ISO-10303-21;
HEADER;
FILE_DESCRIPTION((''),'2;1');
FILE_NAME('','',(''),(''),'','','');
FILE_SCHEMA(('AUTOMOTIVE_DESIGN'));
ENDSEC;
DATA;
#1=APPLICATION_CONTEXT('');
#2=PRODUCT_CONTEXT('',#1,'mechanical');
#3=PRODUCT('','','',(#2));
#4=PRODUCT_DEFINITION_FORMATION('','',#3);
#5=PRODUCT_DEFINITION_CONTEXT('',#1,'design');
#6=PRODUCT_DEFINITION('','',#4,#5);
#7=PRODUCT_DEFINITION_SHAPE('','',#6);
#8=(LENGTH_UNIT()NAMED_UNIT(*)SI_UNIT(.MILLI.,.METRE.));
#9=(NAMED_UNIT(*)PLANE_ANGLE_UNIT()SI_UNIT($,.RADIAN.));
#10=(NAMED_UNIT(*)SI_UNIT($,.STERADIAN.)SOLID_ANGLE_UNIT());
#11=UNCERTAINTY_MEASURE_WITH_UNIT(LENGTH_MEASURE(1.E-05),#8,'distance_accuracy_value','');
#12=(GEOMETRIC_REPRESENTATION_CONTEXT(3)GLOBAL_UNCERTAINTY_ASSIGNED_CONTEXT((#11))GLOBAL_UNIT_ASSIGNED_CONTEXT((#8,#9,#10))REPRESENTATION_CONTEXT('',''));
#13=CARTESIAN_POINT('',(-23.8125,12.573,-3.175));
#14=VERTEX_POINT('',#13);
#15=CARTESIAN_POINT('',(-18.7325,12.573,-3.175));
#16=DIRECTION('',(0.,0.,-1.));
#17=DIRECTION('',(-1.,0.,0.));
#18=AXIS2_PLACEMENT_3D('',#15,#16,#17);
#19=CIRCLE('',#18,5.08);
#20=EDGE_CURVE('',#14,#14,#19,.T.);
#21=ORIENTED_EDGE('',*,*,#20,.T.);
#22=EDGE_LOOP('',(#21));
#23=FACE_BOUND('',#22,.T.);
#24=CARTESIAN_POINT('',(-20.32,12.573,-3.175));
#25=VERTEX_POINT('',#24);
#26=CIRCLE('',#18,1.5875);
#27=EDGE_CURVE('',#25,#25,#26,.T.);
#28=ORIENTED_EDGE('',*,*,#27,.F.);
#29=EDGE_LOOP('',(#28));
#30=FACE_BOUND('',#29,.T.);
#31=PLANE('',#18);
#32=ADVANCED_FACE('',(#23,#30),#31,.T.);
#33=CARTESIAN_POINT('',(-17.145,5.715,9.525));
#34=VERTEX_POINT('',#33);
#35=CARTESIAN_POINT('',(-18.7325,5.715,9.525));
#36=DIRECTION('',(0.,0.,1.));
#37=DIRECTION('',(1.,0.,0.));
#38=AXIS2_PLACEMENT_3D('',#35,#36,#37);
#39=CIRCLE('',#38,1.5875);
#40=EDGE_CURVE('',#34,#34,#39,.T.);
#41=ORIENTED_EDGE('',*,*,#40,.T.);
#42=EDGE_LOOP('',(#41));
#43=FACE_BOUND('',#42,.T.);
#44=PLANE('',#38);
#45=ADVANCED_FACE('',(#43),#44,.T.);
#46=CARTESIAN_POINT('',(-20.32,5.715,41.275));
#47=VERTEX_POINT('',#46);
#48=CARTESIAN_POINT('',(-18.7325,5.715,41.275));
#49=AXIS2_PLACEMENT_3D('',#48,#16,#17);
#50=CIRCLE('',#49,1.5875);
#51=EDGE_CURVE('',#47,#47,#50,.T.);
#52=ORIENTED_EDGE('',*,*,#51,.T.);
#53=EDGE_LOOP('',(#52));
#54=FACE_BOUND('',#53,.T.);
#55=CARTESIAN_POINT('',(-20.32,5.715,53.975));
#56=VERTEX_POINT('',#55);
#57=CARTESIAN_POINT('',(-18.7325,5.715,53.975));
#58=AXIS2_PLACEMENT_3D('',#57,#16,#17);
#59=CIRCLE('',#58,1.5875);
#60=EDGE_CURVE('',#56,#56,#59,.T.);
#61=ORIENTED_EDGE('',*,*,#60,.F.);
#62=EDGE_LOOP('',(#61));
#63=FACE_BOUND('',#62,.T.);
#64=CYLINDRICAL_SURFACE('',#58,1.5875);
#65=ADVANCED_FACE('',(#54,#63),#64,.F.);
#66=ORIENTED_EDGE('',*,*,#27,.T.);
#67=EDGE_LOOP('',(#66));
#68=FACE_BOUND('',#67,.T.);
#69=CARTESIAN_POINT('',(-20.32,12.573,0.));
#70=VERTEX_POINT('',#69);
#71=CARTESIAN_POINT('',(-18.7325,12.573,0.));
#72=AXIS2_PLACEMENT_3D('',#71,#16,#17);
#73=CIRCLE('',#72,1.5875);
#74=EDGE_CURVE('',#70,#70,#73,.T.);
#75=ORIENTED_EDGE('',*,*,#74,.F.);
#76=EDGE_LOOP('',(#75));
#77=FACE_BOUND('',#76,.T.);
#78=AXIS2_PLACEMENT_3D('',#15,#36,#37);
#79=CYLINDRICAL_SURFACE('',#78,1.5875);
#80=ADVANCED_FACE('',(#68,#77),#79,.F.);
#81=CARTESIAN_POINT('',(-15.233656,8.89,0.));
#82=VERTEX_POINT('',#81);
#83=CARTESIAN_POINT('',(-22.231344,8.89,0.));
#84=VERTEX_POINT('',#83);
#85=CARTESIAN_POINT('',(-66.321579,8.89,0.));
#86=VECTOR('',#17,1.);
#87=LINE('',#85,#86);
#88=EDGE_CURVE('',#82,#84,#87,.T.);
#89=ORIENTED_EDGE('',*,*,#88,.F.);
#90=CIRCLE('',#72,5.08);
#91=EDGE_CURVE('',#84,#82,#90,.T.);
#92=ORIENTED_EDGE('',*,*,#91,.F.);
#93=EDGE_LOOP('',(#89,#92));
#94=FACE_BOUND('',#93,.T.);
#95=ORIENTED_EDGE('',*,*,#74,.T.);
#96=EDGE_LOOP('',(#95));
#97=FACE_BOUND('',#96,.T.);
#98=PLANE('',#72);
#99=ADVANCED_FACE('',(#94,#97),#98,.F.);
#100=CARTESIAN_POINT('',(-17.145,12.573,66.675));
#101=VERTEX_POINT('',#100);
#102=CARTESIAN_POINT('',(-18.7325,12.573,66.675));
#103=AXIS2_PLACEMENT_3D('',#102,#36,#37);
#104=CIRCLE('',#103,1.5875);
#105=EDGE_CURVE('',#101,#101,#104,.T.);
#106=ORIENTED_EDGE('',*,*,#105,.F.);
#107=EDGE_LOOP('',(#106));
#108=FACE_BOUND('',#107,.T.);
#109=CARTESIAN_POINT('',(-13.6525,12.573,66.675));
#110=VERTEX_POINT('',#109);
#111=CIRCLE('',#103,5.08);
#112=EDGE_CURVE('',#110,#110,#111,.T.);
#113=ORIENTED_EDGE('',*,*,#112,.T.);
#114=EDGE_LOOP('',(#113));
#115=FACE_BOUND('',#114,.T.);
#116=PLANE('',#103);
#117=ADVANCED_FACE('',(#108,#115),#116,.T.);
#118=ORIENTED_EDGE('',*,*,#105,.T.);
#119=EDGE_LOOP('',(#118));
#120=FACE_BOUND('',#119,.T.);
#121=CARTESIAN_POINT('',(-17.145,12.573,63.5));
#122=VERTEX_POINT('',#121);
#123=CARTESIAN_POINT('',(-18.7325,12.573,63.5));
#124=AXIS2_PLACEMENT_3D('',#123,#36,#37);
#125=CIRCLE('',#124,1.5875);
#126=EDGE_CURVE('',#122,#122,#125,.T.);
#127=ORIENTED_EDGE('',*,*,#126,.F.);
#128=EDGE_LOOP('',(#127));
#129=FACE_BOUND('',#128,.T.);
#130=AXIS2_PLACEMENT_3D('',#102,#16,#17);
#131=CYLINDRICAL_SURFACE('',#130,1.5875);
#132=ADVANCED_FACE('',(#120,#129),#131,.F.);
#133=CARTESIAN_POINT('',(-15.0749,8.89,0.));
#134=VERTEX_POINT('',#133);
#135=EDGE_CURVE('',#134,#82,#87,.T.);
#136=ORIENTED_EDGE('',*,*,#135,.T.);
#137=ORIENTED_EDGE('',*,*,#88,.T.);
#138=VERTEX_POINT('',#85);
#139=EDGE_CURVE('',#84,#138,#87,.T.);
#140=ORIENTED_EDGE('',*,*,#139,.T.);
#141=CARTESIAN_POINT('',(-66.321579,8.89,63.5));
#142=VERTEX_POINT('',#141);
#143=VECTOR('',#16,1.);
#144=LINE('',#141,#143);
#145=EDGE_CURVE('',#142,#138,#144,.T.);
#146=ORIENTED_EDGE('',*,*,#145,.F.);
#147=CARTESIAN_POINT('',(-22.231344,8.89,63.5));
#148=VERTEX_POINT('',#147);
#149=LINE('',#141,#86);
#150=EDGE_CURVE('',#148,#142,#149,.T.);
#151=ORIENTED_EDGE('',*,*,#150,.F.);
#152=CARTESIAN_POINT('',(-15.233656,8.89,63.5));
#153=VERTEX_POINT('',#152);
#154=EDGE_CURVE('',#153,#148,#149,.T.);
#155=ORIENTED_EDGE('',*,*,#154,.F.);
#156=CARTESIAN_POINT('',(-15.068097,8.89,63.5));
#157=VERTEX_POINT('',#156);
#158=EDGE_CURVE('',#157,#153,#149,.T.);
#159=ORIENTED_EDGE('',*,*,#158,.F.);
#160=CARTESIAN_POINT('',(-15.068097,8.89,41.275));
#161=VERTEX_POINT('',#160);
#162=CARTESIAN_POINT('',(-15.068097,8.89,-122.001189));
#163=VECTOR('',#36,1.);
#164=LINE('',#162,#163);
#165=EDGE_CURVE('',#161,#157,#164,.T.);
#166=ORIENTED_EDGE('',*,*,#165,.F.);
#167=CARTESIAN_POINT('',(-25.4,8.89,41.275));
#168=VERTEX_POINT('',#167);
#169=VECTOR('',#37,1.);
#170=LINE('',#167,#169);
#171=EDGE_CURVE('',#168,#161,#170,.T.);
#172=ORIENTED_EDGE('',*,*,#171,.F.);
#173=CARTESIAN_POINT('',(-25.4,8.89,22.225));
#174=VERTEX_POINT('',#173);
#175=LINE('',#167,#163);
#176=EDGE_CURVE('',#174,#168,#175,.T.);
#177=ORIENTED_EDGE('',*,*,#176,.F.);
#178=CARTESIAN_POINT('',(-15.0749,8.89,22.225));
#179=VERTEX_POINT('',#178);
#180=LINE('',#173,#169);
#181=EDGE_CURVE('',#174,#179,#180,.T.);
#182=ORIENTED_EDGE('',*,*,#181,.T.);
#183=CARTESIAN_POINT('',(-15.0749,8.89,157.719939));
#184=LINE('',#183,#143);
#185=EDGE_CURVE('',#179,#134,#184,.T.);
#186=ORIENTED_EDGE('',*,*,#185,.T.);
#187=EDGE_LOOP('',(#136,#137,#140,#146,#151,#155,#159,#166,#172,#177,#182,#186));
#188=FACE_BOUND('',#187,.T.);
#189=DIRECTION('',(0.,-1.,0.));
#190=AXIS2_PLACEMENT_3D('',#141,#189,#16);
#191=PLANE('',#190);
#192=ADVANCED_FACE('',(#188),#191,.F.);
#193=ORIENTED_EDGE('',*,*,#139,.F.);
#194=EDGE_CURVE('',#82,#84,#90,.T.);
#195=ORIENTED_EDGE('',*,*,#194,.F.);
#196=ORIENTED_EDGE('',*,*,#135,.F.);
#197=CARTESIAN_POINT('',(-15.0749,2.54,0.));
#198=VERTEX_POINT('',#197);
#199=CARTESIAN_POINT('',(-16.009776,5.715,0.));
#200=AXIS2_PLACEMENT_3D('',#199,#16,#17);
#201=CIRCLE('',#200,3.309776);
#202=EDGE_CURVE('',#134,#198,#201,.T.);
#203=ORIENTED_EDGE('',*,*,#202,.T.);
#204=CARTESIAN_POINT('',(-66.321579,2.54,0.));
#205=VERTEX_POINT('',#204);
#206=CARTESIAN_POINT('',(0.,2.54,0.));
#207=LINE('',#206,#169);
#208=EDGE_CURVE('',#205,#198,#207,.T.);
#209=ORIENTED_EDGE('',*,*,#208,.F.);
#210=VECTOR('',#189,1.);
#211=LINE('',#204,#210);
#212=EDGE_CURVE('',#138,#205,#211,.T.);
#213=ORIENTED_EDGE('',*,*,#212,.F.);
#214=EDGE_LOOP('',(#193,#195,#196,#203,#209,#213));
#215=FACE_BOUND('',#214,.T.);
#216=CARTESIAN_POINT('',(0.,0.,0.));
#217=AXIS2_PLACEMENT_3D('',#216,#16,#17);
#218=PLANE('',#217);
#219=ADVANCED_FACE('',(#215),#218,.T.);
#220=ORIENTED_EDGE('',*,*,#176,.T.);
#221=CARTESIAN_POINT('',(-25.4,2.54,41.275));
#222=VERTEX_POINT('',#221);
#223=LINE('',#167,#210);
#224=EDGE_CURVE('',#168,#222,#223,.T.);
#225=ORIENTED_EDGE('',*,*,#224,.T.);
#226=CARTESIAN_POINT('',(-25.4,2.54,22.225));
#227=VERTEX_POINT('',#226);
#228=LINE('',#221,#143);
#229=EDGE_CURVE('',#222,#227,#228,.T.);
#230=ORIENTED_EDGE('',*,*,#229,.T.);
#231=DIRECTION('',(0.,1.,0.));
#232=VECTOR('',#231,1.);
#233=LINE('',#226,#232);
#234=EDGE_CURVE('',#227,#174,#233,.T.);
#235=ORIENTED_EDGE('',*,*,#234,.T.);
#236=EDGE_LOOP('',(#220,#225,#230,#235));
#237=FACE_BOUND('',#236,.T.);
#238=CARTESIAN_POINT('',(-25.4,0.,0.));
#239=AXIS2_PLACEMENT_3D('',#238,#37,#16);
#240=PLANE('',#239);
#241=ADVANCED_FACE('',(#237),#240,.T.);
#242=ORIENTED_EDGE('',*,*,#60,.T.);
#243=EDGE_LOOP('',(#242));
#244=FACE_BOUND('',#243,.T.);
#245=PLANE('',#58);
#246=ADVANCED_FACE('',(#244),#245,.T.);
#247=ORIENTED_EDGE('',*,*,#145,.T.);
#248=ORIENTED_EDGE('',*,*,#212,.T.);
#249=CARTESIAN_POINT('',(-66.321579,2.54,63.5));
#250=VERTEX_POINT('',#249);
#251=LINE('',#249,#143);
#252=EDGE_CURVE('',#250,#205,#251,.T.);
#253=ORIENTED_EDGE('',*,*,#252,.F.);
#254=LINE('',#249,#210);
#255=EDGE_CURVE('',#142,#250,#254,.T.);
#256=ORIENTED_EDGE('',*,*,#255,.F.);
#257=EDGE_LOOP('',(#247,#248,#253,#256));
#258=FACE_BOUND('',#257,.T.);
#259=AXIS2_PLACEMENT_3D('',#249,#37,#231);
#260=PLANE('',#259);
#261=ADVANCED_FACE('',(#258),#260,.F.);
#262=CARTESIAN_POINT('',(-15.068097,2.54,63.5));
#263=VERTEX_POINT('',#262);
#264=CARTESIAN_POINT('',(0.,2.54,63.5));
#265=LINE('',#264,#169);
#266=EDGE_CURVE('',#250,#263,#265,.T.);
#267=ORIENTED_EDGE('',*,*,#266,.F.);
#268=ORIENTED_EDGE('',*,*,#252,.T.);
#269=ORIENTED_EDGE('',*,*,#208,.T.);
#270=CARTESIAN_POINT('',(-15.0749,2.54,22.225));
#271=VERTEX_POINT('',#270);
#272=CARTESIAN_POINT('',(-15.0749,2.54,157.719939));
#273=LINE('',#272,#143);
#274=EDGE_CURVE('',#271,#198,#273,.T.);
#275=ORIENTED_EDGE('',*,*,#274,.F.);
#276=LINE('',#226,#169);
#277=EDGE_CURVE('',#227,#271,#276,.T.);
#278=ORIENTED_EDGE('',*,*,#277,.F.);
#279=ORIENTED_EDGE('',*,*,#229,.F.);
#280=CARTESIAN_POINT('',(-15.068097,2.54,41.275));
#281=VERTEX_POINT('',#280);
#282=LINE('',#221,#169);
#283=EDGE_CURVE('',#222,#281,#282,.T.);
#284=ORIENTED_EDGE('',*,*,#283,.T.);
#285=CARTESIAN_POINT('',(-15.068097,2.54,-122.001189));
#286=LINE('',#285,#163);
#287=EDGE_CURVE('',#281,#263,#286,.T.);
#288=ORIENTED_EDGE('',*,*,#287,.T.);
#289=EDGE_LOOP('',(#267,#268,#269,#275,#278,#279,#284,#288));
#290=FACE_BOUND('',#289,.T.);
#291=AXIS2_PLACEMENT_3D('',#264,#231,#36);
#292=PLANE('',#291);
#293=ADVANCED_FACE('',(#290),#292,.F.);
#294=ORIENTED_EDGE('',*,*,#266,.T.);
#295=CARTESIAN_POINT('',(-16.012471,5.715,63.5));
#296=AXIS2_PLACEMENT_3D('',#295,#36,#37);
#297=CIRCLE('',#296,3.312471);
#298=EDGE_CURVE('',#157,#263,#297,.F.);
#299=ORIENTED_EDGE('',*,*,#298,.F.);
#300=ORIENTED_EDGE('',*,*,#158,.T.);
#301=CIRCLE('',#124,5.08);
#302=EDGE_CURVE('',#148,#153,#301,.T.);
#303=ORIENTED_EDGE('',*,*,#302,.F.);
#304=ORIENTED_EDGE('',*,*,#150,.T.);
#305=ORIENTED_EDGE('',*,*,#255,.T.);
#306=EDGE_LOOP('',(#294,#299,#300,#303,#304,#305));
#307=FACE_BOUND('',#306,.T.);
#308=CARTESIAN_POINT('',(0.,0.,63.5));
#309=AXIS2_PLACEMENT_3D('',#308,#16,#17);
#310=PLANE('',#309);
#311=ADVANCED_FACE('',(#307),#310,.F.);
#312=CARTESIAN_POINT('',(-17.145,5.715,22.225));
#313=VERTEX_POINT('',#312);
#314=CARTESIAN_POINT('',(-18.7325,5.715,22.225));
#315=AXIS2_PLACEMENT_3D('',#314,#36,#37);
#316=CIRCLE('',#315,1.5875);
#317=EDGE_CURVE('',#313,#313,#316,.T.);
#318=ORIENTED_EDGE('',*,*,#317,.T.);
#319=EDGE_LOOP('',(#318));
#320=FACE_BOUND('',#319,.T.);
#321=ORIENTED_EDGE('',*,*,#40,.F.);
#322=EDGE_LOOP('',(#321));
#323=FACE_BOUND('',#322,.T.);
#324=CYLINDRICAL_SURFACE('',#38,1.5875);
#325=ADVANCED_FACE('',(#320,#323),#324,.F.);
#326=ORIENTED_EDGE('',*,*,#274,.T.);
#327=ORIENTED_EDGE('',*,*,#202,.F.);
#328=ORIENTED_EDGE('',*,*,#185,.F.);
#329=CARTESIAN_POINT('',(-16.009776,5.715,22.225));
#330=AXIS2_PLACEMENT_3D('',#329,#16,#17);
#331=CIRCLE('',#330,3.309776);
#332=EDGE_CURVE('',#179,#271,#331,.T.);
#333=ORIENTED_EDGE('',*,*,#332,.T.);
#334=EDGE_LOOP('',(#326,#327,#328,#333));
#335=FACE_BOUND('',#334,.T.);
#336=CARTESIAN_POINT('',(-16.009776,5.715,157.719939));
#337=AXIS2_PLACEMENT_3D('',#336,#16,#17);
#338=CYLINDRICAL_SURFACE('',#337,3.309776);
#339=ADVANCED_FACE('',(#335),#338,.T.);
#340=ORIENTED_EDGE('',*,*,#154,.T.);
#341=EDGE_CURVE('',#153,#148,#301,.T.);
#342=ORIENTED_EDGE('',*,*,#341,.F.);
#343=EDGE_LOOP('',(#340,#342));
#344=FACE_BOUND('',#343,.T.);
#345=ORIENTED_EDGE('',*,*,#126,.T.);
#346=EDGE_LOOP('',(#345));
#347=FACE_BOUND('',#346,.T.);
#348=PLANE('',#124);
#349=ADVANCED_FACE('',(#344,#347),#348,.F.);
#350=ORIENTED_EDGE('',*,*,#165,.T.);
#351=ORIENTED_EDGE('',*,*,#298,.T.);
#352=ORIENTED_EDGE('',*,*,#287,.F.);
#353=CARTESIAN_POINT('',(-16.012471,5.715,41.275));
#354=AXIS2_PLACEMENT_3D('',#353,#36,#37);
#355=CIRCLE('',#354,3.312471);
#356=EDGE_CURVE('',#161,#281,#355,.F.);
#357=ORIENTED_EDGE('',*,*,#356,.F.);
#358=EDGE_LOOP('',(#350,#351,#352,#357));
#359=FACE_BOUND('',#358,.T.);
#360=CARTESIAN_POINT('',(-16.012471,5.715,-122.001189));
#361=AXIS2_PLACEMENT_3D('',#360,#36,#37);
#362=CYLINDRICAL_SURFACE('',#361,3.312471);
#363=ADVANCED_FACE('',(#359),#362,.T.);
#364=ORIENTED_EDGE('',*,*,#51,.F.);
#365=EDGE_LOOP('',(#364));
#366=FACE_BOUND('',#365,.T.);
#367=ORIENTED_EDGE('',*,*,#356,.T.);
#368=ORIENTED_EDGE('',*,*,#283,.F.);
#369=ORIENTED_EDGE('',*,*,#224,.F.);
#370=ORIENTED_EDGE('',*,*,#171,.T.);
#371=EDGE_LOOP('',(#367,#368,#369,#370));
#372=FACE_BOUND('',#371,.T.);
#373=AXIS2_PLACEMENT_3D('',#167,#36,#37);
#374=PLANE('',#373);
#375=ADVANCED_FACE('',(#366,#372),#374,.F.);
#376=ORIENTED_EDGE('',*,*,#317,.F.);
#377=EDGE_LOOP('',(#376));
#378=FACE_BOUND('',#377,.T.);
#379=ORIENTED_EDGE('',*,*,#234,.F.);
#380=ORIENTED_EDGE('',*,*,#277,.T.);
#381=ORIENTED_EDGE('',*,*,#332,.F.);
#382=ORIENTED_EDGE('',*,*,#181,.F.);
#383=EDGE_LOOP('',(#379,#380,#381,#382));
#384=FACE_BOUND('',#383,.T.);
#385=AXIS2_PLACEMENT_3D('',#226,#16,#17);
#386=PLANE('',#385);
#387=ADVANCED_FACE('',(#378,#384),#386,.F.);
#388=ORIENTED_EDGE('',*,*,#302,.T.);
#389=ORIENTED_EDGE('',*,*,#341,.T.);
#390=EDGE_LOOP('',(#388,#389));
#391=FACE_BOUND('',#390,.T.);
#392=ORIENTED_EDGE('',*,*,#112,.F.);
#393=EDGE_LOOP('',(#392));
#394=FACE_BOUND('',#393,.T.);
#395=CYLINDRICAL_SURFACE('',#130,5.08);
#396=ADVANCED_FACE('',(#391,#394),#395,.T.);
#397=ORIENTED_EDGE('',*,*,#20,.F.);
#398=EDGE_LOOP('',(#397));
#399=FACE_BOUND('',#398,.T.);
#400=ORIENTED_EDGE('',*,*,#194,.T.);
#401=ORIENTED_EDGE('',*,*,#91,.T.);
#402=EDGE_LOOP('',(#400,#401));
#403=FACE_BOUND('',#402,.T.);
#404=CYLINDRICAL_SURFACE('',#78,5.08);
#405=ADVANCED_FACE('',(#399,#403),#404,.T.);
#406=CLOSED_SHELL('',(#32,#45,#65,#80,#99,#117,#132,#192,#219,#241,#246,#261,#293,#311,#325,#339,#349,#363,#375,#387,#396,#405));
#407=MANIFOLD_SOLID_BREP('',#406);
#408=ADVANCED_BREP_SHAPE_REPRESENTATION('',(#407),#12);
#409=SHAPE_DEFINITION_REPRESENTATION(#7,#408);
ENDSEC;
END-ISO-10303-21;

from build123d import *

# Parameters (mm, degrees)
SKETCH1_W           = 66.321579053
SKETCH1_H           = 6.35
BOSS_EXTRUDE2_DEPTH = 63.5
SKETCH2_W           = 19.05
SKETCH2_H           = 6.35
CUT_EXTRUDE1_DEPTH  = 25.4
SKETCH3_R           = 1.5875
CUT_EXTRUDE2_DEPTH  = 12.7
CUT_EXTRUDE3_START  = -12.7
SKETCH4_R           = 1.5875
CUT_EXTRUDE3_DEPTH  = 12.7
SKETCH5_R           = 5.08
SKETCH5_R_2         = 1.5875
BOSS_EXTRUDE3_DEPTH = 3.175
BOSS_EXTRUDE4_START = 3.175
SKETCH6_R           = 5.08
SKETCH6_R_2         = 1.5875
BOSS_EXTRUDE4_DEPTH = 3.175
SKETCH7_W           = 12.7
SKETCH7_H           = 22.225
CUT_EXTRUDE4_DEPTH  = 6.35
CUT_EXTRUDE5_START  = -22.225
CUT_EXTRUDE5_DEPTH  = 22.225
CUT_EXTRUDE8_START  = -22.225
CUT_EXTRUDE8_DEPTH  = 22.225


# Read off the part's stored shape, not the designer's step: Cut-Extrude5, Cut-Extrude8
with BuildPart() as part:
    # Sketch1 → Boss-Extrude2 (new body)
    with BuildSketch(Plane.XY):
        with Locations((-33.160789527, 5.715)):
            Rectangle(SKETCH1_W, SKETCH1_H)
    extrude(amount=BOSS_EXTRUDE2_DEPTH)

    # Sketch2 → Cut-Extrude1 (cut)
    with BuildSketch(Plane(origin=(0, 0, 0), x_dir=(0, 0, -1), z_dir=(1, 0, 0))):
        with Locations((-31.75, 5.715)):
            Rectangle(SKETCH2_W, SKETCH2_H)
    extrude(amount=-CUT_EXTRUDE1_DEPTH, mode=Mode.SUBTRACT)

    # Sketch3 → Cut-Extrude2 (cut)
    with BuildSketch(Plane(origin=(0, 0, 41.275), x_dir=(-1, 0, 0), z_dir=(0, 0, -1))):
        with Locations((18.7325, 5.715)):
            Circle(SKETCH3_R)
    extrude(amount=-CUT_EXTRUDE2_DEPTH, mode=Mode.SUBTRACT)

    # Sketch4 → Cut-Extrude3 (cut)
    with BuildSketch(Plane.XY.offset(22.225).offset(CUT_EXTRUDE3_START)):
        with Locations(Location((-18.7325, 5.715, 0), (0, 0, 180))):
            Circle(SKETCH4_R)
    extrude(amount=CUT_EXTRUDE3_DEPTH, mode=Mode.SUBTRACT)

    # Sketch5 → Boss-Extrude3 (add)
    with BuildSketch(Plane.XY.offset(63.5)):
        with Locations(Location((-18.7325, 12.573, 0), (0, 0, 226.468847833))):
            Circle(SKETCH5_R)
        with Locations((-18.7325, 12.573)):
            Circle(SKETCH5_R_2, mode=Mode.SUBTRACT)
    extrude(amount=BOSS_EXTRUDE3_DEPTH)

    # Sketch6 → Boss-Extrude4 (add)
    with BuildSketch(Plane(origin=(0, 0, 0), x_dir=(-1, 0, 0), z_dir=(0, 0, -1)).offset(BOSS_EXTRUDE4_START)):
        with Locations(Location((18.7325, 12.573, 0), (0, 0, 313.531152167))):
            Circle(SKETCH6_R)
        with Locations(Location((18.7325, 12.573, 0), (0, 0, 180))):
            Circle(SKETCH6_R_2, mode=Mode.SUBTRACT)
    extrude(amount=-BOSS_EXTRUDE4_DEPTH)

    # Sketch7 → Cut-Extrude4 (cut)
    with BuildSketch(Plane(origin=(0, 8.89, 0), x_dir=(1, 0, 0), z_dir=(0, 1, 0))):
        with Locations((-6.35, -11.1125)):
            Rectangle(SKETCH7_W, SKETCH7_H)
        with Locations((-6.35, -52.3875)):
            Rectangle(SKETCH7_W, SKETCH7_H)
    extrude(amount=-CUT_EXTRUDE4_DEPTH, mode=Mode.SUBTRACT)

    # Cut-Extrude5 outline → Cut-Extrude5 (cut)
    with BuildSketch(Plane(origin=(0, 0, 41.275), x_dir=(-1, 0, 0), z_dir=(0, 0, -1)).offset(CUT_EXTRUDE5_START)):
        with BuildLine():
            Line((12.7, 2.54), (15.068097478, 2.54))
            ThreePointArc((15.068097478, 2.54), (13.357223916, 3.734563769), (12.7, 5.715))
            Line((12.7, 5.715), (12.7, 2.54))
        make_face()
        with BuildLine():
            Line((12.7, 8.89), (12.7, 5.715))
            ThreePointArc((12.7, 5.715), (13.357223916, 7.695436231), (15.068097478, 8.89))
            Line((15.068097478, 8.89), (12.7, 8.89))
        make_face()
    extrude(amount=CUT_EXTRUDE5_DEPTH, mode=Mode.SUBTRACT)

    # Cut-Extrude8 outline → Cut-Extrude8 (cut)
    with BuildSketch(Plane.XY.offset(22.225).offset(CUT_EXTRUDE8_START)):
        with BuildLine():
            Line((-12.7, 8.89), (-15.0749, 8.89))
            ThreePointArc((-15.0749, 8.89), (-13.359413065, 7.697471627), (-12.7, 5.715))
            Line((-12.7, 5.715), (-12.7, 8.89))
        make_face()
        with BuildLine():
            Line((-12.7, 2.54), (-12.7, 5.715))
            ThreePointArc((-12.7, 5.715), (-13.359413065, 3.732528373), (-15.0749, 2.54))
            Line((-15.0749, 2.54), (-12.7, 2.54))
        make_face()
    extrude(amount=CUT_EXTRUDE8_DEPTH, mode=Mode.SUBTRACT)


solid = part.part
